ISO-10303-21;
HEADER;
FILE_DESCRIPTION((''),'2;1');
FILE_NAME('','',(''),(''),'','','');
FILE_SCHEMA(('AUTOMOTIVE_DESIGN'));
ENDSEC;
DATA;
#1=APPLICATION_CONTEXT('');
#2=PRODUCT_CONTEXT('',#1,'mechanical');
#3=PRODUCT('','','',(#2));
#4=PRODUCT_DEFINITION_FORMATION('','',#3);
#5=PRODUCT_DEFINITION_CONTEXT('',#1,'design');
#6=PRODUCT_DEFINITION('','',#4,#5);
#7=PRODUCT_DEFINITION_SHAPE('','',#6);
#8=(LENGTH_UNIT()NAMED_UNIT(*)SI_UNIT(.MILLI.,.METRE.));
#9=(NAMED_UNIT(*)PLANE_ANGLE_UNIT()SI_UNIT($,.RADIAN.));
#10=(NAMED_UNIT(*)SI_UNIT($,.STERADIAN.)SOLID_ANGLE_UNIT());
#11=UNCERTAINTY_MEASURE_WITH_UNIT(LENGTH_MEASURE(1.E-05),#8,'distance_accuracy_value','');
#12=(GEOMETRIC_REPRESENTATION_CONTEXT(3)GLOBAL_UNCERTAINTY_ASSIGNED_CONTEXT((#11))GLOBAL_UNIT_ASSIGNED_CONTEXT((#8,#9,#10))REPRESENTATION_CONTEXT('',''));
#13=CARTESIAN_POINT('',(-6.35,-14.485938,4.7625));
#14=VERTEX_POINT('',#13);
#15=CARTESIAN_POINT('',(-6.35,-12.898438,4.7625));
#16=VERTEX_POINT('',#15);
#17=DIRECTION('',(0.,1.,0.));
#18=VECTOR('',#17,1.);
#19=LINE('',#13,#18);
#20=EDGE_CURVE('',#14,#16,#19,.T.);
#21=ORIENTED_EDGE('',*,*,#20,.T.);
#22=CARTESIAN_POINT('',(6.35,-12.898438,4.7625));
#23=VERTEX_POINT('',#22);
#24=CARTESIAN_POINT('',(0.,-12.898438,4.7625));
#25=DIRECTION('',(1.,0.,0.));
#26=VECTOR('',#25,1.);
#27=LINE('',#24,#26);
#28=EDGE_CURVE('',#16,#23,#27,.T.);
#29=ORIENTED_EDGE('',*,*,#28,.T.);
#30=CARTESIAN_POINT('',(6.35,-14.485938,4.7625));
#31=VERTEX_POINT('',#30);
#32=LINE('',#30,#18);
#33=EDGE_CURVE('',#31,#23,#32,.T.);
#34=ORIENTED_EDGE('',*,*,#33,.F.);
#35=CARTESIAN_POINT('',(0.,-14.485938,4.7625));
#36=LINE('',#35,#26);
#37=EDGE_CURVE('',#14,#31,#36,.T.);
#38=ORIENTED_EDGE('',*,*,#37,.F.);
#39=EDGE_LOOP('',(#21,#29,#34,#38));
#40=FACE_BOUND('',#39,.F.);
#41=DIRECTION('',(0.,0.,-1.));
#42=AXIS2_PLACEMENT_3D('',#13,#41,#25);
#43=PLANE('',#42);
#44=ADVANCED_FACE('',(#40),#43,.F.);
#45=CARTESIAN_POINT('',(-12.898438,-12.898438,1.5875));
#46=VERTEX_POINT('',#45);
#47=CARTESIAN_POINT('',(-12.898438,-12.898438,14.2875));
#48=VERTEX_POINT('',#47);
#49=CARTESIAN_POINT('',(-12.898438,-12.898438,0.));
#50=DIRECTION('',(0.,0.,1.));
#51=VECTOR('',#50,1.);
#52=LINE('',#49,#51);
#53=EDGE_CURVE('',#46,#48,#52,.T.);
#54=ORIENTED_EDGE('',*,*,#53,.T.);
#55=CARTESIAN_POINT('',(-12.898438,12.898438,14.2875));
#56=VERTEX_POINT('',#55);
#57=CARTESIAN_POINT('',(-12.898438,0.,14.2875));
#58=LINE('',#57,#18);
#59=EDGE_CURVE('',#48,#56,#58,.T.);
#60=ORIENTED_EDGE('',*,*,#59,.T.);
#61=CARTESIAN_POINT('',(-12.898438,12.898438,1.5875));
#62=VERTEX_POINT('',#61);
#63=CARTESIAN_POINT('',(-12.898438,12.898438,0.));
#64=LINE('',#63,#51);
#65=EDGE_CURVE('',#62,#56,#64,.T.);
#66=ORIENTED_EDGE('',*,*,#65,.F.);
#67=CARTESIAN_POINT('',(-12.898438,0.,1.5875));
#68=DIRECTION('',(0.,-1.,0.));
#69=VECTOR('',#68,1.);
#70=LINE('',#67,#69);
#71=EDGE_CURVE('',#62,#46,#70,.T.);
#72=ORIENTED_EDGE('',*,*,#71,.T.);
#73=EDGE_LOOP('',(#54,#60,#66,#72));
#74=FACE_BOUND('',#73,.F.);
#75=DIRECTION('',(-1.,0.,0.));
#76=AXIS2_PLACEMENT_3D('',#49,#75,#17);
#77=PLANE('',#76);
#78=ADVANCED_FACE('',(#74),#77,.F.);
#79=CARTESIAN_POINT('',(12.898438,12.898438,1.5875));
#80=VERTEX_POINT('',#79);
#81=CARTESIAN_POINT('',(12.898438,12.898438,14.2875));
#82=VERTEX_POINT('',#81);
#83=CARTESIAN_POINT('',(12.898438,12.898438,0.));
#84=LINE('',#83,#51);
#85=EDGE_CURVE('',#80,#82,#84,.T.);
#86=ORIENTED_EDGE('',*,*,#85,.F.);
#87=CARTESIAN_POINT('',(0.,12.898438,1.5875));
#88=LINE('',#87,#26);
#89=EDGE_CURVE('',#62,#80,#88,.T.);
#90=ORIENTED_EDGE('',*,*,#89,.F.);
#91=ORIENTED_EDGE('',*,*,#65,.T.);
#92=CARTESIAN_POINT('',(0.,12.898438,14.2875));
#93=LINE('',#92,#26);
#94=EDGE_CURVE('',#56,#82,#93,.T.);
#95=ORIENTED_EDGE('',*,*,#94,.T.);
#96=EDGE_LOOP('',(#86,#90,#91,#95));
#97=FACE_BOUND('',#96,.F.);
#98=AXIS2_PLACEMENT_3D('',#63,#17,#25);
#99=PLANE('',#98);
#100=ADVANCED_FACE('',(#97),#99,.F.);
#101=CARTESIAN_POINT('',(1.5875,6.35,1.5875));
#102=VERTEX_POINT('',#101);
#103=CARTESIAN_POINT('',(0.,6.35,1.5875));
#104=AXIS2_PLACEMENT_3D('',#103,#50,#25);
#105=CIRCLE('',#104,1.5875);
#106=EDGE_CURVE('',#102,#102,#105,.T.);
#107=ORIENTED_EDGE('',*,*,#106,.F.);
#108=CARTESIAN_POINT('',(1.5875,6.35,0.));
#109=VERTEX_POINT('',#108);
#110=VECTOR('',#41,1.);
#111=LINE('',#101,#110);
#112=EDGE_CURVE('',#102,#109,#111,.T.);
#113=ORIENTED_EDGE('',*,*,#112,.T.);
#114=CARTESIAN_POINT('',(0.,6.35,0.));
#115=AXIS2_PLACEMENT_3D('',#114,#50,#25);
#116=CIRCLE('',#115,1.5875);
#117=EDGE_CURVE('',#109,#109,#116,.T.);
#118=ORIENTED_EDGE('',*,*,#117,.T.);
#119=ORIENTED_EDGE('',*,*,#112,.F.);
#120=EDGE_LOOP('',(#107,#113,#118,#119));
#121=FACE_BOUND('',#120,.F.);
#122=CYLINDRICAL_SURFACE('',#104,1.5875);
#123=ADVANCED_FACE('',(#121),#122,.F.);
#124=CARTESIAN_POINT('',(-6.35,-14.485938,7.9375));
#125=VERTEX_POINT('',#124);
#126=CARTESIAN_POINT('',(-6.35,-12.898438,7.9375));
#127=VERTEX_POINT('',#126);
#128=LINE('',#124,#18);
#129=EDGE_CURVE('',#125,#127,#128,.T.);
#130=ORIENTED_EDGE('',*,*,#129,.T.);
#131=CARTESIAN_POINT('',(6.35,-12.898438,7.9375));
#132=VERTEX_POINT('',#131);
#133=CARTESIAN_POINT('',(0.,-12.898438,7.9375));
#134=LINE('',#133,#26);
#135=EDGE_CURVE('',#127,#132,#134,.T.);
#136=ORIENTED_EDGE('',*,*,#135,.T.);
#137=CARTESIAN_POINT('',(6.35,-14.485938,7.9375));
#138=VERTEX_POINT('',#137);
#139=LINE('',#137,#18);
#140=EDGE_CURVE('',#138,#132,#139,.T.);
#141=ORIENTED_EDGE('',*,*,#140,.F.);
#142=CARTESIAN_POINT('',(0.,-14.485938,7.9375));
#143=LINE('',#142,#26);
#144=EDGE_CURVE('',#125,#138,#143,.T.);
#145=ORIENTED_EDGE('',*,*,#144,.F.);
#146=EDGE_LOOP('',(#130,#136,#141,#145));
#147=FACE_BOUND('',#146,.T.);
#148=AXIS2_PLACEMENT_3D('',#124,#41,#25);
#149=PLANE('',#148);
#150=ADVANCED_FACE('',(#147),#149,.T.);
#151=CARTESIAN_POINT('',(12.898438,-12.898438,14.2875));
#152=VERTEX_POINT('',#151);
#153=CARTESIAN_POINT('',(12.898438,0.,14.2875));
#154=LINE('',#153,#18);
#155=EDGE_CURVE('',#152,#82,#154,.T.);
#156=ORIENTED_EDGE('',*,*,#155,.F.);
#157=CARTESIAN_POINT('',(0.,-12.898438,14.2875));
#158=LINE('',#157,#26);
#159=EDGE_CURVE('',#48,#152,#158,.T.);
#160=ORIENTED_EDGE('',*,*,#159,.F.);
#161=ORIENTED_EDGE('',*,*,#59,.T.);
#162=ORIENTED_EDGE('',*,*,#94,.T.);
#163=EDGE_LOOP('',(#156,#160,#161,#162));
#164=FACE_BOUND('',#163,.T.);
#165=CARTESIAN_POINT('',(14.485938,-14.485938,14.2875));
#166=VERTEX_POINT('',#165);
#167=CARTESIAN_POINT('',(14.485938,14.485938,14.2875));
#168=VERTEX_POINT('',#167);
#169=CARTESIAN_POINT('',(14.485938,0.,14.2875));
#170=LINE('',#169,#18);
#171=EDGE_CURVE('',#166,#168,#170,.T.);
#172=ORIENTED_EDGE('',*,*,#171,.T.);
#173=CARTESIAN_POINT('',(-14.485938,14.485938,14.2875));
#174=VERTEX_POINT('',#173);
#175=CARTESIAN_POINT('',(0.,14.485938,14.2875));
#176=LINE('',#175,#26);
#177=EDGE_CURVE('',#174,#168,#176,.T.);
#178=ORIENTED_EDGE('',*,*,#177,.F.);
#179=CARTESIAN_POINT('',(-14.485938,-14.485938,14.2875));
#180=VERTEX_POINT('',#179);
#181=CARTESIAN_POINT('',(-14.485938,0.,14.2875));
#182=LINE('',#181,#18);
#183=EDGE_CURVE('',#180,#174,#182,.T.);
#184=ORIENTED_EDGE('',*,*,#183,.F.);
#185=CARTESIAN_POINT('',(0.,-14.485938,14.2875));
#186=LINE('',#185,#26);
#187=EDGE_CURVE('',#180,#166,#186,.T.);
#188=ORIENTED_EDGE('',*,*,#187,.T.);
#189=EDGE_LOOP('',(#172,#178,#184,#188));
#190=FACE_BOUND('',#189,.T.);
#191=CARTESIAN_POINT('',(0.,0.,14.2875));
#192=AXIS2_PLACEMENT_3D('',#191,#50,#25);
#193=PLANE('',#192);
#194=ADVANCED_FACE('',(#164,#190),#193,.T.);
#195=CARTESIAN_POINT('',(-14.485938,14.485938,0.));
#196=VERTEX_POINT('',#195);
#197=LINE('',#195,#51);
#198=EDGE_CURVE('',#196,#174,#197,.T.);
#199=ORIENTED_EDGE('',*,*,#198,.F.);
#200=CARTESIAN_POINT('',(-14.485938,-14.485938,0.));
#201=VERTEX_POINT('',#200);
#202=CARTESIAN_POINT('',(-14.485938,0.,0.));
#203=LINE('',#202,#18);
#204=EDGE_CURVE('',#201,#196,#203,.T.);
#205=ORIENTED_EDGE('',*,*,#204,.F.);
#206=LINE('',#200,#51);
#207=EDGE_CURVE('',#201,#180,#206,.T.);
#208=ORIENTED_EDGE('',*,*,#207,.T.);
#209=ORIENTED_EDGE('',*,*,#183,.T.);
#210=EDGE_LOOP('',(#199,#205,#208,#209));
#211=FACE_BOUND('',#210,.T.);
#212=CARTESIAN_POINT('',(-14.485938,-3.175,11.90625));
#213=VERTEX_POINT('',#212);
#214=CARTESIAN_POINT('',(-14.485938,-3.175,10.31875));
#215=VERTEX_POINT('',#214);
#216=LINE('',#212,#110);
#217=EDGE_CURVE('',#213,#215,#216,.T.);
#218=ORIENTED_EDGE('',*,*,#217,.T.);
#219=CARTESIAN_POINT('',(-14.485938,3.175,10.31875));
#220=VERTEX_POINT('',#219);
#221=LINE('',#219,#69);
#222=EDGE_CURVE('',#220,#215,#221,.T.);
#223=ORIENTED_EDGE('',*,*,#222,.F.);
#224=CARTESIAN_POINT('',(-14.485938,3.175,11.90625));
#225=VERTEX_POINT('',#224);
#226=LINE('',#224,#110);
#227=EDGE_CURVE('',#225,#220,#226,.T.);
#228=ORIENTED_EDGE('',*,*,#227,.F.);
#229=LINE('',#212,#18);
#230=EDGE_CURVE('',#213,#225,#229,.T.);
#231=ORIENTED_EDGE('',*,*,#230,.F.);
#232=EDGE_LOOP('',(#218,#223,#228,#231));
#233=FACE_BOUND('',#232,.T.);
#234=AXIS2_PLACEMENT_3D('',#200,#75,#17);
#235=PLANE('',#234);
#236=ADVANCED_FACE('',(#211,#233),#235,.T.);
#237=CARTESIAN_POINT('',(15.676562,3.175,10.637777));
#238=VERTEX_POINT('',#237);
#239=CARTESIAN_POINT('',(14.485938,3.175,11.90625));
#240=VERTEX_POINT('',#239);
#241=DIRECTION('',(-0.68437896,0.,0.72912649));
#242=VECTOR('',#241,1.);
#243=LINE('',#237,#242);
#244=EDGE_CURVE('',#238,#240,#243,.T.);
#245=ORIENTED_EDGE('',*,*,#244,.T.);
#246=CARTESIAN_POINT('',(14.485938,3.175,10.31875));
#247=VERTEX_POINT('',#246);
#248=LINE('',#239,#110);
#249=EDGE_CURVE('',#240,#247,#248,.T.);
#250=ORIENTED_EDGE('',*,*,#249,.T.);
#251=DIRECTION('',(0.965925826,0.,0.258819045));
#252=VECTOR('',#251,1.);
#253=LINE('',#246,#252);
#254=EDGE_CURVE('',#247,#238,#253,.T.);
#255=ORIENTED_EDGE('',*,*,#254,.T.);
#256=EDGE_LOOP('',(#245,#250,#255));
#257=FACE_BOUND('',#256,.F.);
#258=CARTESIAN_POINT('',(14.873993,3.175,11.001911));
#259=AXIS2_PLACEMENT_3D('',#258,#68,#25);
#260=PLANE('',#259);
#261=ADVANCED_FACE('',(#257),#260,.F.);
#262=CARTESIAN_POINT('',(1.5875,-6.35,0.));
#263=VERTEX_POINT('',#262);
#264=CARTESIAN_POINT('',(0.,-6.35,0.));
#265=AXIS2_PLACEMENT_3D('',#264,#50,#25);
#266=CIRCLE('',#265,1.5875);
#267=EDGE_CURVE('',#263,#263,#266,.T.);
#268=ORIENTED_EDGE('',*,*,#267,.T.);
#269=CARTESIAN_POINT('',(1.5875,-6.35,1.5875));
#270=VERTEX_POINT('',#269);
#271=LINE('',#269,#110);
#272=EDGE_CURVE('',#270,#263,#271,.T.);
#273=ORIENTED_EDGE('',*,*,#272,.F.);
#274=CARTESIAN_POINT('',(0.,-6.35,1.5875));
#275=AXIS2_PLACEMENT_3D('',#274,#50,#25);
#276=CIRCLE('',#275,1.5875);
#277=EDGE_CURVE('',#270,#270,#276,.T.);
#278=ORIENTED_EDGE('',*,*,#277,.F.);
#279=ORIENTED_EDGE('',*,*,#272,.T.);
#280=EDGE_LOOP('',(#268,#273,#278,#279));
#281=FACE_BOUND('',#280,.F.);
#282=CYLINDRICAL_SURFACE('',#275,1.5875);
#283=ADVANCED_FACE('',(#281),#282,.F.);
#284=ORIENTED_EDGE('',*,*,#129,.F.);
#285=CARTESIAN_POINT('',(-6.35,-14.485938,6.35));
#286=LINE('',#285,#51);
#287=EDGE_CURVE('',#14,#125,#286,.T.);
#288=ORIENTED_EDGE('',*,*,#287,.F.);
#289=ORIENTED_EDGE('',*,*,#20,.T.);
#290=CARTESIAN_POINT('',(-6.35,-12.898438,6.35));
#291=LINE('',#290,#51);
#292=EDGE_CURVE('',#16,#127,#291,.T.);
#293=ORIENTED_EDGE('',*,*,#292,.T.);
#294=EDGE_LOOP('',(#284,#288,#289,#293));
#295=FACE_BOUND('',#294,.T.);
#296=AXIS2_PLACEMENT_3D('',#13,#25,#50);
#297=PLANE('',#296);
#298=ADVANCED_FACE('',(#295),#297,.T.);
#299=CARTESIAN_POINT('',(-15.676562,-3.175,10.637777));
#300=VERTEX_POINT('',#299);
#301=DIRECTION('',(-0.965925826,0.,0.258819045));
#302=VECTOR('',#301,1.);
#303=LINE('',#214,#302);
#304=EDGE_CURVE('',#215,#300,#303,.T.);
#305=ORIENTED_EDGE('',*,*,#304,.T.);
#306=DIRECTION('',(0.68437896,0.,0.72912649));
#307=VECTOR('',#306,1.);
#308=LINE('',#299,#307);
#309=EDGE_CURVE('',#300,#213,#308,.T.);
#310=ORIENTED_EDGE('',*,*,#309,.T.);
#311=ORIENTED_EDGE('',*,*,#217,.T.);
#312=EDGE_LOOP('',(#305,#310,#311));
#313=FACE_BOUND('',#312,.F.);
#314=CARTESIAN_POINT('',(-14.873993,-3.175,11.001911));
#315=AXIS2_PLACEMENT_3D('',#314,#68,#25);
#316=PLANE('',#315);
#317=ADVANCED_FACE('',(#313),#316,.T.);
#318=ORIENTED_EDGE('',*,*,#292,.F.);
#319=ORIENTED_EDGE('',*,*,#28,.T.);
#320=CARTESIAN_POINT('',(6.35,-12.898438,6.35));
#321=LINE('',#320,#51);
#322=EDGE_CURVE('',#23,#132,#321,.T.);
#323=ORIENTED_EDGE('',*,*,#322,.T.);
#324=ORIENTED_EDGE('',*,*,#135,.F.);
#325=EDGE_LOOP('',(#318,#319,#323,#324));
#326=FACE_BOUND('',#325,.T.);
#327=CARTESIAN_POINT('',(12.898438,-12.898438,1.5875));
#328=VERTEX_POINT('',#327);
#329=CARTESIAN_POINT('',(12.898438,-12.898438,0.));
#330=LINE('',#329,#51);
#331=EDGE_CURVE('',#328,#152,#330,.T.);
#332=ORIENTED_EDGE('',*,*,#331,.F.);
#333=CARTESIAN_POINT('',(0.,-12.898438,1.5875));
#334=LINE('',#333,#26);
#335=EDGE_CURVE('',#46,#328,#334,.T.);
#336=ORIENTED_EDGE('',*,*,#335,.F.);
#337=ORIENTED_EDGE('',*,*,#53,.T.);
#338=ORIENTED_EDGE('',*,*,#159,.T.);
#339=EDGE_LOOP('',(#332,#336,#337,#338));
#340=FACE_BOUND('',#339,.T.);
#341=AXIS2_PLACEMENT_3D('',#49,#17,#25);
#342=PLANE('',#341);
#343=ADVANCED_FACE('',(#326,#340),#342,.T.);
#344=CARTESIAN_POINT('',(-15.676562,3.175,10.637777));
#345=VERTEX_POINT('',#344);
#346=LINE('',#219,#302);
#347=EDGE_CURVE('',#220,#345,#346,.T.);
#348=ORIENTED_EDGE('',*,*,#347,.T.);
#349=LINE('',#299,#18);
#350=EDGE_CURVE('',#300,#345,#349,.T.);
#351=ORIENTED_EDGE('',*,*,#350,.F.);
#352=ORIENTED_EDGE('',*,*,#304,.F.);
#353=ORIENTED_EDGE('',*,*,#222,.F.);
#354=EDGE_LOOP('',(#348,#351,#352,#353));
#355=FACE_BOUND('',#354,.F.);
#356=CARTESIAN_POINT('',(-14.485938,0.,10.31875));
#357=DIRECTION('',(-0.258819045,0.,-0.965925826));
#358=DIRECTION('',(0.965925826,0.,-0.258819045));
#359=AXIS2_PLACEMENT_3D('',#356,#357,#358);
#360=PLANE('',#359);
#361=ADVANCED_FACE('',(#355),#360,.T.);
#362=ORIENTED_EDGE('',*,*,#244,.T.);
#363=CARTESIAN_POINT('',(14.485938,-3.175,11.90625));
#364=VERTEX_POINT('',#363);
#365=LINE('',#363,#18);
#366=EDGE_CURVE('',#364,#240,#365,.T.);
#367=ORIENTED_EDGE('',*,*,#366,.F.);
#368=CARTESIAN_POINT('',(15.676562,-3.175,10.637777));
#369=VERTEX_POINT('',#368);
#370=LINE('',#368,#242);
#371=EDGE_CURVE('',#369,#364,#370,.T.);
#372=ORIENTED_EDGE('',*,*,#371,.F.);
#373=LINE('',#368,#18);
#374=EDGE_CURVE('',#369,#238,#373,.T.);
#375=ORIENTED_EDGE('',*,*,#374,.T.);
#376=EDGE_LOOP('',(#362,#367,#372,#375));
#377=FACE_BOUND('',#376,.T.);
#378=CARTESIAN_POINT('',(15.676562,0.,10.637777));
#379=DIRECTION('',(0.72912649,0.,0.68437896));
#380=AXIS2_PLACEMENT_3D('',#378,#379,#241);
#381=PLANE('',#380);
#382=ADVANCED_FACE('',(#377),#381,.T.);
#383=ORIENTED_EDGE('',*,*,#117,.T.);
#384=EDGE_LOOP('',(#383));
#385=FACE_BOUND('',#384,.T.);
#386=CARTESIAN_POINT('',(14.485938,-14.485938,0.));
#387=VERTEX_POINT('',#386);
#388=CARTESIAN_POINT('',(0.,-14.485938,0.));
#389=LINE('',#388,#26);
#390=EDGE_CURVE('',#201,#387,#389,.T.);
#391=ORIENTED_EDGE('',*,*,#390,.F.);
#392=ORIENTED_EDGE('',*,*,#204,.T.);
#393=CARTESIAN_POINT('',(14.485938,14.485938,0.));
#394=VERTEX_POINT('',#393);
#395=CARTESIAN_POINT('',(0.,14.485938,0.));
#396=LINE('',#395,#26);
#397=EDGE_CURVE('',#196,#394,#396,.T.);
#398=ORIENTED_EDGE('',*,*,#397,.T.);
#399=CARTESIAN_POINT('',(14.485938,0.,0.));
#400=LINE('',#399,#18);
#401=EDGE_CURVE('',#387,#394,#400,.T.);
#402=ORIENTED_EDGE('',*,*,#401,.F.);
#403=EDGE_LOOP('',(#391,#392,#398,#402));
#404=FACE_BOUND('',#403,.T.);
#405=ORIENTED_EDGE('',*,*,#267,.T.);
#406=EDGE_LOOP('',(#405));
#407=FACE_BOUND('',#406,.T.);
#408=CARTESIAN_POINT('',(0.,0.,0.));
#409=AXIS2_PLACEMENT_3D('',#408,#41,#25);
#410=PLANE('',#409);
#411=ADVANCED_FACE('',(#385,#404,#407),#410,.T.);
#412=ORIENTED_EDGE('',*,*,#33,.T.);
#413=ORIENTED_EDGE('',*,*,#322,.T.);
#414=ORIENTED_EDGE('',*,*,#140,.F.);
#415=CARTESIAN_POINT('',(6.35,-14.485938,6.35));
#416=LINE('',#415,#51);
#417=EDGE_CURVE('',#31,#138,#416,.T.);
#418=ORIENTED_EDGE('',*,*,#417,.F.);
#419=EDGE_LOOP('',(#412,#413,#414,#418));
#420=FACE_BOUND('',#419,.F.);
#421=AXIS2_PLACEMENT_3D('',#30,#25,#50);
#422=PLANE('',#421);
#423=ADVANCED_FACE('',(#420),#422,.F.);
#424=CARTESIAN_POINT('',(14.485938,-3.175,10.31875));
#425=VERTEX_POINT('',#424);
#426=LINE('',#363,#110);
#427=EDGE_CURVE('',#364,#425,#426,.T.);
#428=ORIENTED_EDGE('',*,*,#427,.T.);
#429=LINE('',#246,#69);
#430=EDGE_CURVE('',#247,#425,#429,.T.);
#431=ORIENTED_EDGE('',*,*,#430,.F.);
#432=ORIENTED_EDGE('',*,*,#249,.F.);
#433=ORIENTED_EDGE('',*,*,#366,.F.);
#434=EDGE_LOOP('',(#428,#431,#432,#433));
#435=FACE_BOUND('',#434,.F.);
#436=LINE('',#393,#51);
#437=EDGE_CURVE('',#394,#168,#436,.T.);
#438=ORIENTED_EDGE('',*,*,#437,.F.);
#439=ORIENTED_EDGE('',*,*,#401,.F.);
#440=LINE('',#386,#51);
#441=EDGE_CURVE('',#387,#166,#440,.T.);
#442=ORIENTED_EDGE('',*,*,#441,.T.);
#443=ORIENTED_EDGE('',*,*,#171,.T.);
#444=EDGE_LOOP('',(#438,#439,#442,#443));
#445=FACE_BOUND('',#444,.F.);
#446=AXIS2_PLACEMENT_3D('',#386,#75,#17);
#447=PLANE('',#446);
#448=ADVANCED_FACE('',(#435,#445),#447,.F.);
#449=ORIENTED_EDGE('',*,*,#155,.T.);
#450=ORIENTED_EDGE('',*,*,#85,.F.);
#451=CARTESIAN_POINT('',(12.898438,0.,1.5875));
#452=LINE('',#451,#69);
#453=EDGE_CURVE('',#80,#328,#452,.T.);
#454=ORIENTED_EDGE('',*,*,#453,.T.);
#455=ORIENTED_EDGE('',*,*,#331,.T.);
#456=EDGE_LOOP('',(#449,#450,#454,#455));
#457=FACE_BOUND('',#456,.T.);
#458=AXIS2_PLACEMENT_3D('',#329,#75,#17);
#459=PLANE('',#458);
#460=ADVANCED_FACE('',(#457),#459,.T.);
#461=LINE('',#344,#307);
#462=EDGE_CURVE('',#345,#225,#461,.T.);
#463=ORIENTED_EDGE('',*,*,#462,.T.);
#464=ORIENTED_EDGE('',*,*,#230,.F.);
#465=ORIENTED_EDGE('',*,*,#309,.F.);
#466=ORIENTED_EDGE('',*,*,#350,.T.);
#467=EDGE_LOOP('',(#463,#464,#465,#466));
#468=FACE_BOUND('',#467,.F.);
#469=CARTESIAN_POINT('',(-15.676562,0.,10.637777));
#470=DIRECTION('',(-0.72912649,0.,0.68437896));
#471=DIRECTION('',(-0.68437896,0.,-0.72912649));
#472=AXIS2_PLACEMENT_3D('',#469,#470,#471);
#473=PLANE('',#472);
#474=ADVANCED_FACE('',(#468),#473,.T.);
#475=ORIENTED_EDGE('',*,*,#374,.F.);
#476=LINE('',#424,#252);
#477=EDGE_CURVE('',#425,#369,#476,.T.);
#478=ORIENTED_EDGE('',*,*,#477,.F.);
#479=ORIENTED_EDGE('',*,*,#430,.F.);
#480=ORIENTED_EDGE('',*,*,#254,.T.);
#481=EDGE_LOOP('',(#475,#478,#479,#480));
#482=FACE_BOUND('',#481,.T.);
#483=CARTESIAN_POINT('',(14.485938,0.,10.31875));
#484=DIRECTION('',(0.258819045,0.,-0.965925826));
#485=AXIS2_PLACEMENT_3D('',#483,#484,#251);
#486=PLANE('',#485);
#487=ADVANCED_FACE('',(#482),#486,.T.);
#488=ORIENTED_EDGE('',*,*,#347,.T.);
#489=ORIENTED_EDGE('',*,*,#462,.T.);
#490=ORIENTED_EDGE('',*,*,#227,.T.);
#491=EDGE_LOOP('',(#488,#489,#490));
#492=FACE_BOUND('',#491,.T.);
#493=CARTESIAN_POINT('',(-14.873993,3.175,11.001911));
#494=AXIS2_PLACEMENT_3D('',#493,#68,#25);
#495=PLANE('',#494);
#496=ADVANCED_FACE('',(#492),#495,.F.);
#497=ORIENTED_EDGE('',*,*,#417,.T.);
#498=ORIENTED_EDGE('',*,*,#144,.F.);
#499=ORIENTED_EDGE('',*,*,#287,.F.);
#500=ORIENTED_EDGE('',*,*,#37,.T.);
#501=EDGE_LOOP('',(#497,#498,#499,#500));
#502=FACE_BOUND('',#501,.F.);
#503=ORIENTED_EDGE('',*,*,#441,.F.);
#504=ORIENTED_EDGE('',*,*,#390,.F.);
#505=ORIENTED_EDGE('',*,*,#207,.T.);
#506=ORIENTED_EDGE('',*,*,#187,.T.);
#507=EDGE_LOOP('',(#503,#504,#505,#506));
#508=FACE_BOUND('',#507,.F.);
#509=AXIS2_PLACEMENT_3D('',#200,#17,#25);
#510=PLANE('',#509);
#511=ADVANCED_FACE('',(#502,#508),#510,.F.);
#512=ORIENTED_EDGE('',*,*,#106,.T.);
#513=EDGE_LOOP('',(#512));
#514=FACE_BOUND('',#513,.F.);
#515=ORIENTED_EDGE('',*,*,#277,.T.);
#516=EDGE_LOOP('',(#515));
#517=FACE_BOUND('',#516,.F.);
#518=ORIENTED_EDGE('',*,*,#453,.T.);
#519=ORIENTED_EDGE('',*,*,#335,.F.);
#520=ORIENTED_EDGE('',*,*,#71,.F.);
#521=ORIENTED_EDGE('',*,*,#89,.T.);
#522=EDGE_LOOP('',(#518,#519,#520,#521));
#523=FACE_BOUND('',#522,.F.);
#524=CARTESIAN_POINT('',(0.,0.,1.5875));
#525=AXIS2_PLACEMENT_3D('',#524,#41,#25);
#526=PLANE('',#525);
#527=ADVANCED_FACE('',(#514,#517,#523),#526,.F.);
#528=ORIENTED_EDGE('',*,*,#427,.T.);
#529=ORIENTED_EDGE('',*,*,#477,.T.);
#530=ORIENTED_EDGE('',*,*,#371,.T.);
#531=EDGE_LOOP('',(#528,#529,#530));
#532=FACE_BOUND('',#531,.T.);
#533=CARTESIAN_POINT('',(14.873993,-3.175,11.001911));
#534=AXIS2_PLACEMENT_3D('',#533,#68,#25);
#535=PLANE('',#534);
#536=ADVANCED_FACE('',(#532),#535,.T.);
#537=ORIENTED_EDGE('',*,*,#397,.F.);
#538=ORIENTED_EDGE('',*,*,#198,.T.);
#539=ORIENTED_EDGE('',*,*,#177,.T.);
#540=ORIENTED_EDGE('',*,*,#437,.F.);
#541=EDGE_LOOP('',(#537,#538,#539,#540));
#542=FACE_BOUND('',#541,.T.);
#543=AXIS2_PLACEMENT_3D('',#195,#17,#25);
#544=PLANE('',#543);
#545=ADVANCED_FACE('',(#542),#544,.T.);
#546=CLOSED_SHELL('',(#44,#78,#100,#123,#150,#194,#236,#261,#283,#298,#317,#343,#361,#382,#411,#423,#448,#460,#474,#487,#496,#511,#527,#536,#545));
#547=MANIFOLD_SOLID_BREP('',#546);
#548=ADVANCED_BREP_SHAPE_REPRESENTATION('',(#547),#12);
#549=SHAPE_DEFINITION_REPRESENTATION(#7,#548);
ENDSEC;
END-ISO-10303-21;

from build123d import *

# Parameters (mm, degrees)
F0_W      = 28.971875
F0_H      = 28.971875
F0_W_2    = 25.796875
F0_H_2    = 25.796875
F1_DEPTH  = 14.2875
F2_W      = 25.796875
F2_H      = 25.796875
F3_DEPTH  = 1.5875
F6_DEPTH  = 3.175
F8_R      = 1.5875
F9_DEPTH  = 1.5885
F10_W     = 12.7
F10_H     = 3.175
F11_DEPTH = 1.5875


# Not quite as in the source:
# - a pattern or mirror of a feature is missing from the dataset's text; its kind, count and spacing are read off the source's solid


with BuildPart() as f1:
    # F0 (on Top) → F1 (new body)
    with BuildSketch(Plane.XY):
        Rectangle(F0_W, F0_H)
        Rectangle(F0_W_2, F0_H_2, mode=Mode.SUBTRACT)
    extrude(amount=F1_DEPTH)

    # F2 (on face) → F3 (join)
    with BuildSketch(Plane(origin=(0, 0, 0), x_dir=(1, 0, 0), z_dir=(0, 0, -1))):
        Rectangle(F2_W, F2_H)
    extrude(amount=-F3_DEPTH)

    # F4: union 

    # F5 (on Front) → F6 (join, symmetric)
    with BuildSketch(Plane.XZ):
        Polygon((14.4859375, 11.90625), (14.4859375, 10.31875), (15.6765625, 10.6377770072), align=None)
    f6 = extrude(amount=F6_DEPTH, both=True)

    # F6_copies: F6 across plane
    add(f6.mirror(Plane(origin=(0, 0, 0), x_dir=(0, 0, -1), z_dir=(-1, 0, 0))))

    # F8 (on face) → F9 (cut, through all)
    with BuildSketch(Plane.XY.offset(1.5875)):
        with Locations((0, 6.35)):
            Circle(F8_R)
        with Locations((0, -6.35)):
            Circle(F8_R)
    extrude(amount=-F9_DEPTH, mode=Mode.SUBTRACT)

    # F10 (on face) → F11 (cut, through all)
    with BuildSketch(Plane.XZ.offset(14.4859375)):
        with Locations((0, 6.35)):
            Rectangle(F10_W, F10_H)
    extrude(amount=-F11_DEPTH, mode=Mode.SUBTRACT)


solid = f1.part
